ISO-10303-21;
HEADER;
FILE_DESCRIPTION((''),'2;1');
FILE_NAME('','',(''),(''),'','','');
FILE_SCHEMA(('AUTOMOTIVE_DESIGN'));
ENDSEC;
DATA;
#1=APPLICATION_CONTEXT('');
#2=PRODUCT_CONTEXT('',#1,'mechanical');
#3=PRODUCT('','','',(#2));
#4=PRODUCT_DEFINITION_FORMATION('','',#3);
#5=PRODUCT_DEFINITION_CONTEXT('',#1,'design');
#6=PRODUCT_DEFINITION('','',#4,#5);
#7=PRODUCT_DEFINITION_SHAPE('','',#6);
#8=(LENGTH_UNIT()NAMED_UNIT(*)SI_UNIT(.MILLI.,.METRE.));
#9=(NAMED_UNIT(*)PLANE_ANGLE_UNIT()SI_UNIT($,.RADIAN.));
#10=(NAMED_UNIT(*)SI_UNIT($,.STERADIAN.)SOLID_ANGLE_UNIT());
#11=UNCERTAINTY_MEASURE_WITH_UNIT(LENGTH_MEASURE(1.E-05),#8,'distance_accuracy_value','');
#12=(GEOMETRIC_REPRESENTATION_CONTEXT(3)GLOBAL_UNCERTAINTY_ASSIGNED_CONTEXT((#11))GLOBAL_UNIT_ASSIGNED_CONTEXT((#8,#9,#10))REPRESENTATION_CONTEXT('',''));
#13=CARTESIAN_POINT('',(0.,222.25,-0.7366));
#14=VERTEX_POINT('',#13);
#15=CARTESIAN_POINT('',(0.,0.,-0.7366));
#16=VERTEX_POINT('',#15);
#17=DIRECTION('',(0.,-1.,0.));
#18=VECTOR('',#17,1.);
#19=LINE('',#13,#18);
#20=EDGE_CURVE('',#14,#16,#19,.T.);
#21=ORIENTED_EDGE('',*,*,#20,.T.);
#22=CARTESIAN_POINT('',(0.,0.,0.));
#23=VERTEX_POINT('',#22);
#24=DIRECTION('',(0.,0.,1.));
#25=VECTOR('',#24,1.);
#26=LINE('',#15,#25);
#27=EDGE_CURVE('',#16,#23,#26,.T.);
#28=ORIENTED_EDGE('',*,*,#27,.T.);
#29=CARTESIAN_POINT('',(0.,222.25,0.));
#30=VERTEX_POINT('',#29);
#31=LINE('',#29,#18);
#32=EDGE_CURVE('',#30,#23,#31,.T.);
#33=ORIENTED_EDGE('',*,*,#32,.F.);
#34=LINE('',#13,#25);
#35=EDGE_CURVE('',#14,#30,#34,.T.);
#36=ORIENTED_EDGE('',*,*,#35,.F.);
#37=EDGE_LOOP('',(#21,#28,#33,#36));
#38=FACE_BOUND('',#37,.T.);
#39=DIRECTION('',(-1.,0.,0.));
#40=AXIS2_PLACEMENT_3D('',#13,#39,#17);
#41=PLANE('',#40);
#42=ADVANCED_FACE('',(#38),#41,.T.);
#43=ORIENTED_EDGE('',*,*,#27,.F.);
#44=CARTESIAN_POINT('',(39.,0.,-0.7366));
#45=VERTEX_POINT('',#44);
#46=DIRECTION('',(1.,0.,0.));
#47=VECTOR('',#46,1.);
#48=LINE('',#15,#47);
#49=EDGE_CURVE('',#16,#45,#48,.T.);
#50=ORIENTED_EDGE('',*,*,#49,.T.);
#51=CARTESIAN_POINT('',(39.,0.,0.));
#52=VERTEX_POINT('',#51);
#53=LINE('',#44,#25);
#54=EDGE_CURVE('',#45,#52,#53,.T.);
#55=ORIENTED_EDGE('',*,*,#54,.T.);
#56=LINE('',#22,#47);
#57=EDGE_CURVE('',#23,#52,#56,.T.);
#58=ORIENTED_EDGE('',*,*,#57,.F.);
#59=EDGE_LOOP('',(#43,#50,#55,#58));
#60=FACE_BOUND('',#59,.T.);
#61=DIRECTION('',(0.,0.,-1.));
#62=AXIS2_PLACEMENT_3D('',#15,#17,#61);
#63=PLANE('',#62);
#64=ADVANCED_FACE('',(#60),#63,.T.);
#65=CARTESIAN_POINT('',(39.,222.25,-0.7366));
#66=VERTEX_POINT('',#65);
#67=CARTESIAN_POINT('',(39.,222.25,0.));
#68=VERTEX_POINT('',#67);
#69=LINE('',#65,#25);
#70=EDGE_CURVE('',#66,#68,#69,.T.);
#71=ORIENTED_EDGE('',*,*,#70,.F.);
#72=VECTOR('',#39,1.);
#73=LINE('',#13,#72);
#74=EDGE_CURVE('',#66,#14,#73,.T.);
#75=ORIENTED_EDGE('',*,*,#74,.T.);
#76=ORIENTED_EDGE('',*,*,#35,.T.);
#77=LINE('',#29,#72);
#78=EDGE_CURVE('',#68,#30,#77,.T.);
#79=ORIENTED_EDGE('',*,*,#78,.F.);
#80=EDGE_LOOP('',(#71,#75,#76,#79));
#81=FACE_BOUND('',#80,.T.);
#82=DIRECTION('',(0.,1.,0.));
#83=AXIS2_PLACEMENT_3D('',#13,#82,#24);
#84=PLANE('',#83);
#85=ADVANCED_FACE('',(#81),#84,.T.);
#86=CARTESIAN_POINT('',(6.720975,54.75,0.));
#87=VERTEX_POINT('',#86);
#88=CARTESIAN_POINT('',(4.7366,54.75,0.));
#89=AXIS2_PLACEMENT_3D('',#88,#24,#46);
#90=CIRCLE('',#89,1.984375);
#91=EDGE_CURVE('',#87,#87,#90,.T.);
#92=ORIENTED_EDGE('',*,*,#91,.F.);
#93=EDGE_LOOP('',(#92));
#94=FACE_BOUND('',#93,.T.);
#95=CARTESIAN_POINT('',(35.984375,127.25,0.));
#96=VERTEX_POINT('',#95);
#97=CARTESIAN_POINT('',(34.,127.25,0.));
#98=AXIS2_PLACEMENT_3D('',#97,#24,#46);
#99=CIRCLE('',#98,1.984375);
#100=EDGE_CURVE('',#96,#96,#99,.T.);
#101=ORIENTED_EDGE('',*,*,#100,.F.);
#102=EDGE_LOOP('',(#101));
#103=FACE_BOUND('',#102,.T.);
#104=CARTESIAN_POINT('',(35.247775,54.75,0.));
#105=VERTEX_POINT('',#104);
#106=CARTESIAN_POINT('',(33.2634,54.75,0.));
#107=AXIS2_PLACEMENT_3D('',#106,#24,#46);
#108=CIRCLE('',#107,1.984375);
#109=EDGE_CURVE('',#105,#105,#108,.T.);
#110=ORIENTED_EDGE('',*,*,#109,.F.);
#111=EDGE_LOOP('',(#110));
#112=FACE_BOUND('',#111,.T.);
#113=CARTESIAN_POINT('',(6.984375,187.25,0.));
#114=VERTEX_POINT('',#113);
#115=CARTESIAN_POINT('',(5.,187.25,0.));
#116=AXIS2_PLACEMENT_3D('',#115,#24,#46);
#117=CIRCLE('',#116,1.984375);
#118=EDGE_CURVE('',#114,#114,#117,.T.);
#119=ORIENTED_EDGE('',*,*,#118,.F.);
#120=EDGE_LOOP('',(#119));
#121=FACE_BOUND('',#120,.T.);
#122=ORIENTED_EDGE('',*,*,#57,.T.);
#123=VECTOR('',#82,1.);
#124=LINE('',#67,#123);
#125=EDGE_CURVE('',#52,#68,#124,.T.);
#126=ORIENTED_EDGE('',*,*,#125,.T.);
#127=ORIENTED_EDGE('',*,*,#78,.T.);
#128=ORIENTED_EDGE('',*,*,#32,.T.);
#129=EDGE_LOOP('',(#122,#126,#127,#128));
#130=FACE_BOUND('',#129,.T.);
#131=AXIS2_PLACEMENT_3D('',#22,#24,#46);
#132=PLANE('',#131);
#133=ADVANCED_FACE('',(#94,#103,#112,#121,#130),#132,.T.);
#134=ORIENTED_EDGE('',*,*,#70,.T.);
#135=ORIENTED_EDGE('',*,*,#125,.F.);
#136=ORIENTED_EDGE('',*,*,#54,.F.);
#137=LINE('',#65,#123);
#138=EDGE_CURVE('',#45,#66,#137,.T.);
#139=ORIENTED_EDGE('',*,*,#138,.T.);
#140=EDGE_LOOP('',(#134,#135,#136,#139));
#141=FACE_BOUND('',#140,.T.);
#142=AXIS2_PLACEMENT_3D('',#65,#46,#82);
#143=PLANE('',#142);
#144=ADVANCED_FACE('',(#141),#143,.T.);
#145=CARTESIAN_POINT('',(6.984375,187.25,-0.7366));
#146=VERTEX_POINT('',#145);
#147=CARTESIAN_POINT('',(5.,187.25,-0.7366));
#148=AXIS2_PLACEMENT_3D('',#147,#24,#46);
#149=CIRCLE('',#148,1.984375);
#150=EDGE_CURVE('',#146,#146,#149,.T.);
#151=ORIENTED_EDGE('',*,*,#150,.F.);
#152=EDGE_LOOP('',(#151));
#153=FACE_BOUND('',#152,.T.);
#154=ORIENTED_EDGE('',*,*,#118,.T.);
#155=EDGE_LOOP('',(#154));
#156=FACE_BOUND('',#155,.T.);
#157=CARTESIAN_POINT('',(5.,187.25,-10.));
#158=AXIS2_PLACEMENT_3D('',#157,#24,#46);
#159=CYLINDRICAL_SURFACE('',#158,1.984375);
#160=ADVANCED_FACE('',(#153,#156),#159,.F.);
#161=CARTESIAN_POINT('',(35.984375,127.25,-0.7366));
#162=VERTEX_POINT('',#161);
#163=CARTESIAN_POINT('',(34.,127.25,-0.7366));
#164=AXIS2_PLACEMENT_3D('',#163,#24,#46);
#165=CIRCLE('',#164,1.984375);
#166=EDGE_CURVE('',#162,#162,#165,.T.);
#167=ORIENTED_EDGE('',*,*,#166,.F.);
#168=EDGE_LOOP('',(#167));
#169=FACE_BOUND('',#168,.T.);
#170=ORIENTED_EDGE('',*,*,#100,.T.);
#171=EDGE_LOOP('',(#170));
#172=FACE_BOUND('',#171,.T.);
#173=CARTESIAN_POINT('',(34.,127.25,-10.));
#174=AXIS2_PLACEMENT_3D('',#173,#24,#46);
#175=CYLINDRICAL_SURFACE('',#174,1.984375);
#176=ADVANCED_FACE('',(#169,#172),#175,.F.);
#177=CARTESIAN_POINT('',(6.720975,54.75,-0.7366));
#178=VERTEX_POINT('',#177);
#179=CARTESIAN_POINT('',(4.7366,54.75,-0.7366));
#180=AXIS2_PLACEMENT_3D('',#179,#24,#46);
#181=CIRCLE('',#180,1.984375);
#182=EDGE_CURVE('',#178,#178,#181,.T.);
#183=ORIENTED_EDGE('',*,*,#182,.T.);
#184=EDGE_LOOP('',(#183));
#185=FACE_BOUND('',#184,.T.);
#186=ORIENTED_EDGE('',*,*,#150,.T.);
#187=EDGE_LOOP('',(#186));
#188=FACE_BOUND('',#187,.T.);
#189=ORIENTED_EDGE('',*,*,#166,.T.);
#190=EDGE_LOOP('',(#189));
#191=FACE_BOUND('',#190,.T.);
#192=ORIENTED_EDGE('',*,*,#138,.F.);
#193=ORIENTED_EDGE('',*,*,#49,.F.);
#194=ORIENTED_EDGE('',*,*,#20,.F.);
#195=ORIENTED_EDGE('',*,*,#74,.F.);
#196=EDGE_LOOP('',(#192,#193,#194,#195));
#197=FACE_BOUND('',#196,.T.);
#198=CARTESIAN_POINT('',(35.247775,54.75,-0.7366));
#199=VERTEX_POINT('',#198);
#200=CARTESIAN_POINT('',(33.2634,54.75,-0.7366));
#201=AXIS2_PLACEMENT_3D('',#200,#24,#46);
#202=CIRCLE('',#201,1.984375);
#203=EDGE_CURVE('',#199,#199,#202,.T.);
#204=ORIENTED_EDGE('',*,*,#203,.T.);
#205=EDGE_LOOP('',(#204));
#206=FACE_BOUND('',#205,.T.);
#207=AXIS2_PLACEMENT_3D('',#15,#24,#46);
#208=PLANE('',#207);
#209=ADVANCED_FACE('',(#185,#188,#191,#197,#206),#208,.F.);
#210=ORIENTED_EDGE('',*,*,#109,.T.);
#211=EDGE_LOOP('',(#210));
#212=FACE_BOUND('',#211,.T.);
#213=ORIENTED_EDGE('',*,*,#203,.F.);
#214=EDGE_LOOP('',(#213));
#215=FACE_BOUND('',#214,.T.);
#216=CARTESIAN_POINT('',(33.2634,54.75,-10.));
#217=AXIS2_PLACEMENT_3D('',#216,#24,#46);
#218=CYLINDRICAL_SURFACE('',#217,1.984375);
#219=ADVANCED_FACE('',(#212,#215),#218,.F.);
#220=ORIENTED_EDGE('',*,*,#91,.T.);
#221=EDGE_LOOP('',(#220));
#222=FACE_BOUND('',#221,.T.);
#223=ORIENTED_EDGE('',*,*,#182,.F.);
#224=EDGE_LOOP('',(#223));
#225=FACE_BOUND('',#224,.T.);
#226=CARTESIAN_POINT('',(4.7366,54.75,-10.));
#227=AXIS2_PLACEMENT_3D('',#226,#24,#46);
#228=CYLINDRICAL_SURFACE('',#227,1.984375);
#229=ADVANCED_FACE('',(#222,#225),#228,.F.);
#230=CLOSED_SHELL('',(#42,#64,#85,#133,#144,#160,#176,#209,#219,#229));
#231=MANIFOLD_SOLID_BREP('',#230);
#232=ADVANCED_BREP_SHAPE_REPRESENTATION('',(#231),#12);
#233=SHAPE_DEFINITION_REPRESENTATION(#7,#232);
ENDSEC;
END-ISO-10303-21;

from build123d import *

# Parameters (mm, degrees)
SKETCH1_W          = 39
SKETCH1_H          = 222.25
BASE_FLANGE1_DEPTH = 0.7366
SKETCH2_R          = 1.984375
CUT_EXTRUDE1_DEPTH = 10


# Sheet-metal steps are written as plain solids
with BuildPart() as part:
    # Sketch1 → Base-Flange1 (new body)
    with BuildSketch(Plane.XY):
        with Locations((19.5, 111.125)):
            Rectangle(SKETCH1_W, SKETCH1_H)
    extrude(amount=-BASE_FLANGE1_DEPTH)

    # Sketch2 → Cut-Extrude1 (cut)
    with BuildSketch(Plane.XY):
        with Locations((5, 187.25)):
            Circle(SKETCH2_R)
        with Locations((34, 127.25)):
            Circle(SKETCH2_R)
        with Locations((4.7366, 54.75)):
            Circle(SKETCH2_R)
        with Locations((33.2634, 54.75)):
            Circle(SKETCH2_R)
    extrude(amount=-CUT_EXTRUDE1_DEPTH, mode=Mode.SUBTRACT)


solid = part.part
